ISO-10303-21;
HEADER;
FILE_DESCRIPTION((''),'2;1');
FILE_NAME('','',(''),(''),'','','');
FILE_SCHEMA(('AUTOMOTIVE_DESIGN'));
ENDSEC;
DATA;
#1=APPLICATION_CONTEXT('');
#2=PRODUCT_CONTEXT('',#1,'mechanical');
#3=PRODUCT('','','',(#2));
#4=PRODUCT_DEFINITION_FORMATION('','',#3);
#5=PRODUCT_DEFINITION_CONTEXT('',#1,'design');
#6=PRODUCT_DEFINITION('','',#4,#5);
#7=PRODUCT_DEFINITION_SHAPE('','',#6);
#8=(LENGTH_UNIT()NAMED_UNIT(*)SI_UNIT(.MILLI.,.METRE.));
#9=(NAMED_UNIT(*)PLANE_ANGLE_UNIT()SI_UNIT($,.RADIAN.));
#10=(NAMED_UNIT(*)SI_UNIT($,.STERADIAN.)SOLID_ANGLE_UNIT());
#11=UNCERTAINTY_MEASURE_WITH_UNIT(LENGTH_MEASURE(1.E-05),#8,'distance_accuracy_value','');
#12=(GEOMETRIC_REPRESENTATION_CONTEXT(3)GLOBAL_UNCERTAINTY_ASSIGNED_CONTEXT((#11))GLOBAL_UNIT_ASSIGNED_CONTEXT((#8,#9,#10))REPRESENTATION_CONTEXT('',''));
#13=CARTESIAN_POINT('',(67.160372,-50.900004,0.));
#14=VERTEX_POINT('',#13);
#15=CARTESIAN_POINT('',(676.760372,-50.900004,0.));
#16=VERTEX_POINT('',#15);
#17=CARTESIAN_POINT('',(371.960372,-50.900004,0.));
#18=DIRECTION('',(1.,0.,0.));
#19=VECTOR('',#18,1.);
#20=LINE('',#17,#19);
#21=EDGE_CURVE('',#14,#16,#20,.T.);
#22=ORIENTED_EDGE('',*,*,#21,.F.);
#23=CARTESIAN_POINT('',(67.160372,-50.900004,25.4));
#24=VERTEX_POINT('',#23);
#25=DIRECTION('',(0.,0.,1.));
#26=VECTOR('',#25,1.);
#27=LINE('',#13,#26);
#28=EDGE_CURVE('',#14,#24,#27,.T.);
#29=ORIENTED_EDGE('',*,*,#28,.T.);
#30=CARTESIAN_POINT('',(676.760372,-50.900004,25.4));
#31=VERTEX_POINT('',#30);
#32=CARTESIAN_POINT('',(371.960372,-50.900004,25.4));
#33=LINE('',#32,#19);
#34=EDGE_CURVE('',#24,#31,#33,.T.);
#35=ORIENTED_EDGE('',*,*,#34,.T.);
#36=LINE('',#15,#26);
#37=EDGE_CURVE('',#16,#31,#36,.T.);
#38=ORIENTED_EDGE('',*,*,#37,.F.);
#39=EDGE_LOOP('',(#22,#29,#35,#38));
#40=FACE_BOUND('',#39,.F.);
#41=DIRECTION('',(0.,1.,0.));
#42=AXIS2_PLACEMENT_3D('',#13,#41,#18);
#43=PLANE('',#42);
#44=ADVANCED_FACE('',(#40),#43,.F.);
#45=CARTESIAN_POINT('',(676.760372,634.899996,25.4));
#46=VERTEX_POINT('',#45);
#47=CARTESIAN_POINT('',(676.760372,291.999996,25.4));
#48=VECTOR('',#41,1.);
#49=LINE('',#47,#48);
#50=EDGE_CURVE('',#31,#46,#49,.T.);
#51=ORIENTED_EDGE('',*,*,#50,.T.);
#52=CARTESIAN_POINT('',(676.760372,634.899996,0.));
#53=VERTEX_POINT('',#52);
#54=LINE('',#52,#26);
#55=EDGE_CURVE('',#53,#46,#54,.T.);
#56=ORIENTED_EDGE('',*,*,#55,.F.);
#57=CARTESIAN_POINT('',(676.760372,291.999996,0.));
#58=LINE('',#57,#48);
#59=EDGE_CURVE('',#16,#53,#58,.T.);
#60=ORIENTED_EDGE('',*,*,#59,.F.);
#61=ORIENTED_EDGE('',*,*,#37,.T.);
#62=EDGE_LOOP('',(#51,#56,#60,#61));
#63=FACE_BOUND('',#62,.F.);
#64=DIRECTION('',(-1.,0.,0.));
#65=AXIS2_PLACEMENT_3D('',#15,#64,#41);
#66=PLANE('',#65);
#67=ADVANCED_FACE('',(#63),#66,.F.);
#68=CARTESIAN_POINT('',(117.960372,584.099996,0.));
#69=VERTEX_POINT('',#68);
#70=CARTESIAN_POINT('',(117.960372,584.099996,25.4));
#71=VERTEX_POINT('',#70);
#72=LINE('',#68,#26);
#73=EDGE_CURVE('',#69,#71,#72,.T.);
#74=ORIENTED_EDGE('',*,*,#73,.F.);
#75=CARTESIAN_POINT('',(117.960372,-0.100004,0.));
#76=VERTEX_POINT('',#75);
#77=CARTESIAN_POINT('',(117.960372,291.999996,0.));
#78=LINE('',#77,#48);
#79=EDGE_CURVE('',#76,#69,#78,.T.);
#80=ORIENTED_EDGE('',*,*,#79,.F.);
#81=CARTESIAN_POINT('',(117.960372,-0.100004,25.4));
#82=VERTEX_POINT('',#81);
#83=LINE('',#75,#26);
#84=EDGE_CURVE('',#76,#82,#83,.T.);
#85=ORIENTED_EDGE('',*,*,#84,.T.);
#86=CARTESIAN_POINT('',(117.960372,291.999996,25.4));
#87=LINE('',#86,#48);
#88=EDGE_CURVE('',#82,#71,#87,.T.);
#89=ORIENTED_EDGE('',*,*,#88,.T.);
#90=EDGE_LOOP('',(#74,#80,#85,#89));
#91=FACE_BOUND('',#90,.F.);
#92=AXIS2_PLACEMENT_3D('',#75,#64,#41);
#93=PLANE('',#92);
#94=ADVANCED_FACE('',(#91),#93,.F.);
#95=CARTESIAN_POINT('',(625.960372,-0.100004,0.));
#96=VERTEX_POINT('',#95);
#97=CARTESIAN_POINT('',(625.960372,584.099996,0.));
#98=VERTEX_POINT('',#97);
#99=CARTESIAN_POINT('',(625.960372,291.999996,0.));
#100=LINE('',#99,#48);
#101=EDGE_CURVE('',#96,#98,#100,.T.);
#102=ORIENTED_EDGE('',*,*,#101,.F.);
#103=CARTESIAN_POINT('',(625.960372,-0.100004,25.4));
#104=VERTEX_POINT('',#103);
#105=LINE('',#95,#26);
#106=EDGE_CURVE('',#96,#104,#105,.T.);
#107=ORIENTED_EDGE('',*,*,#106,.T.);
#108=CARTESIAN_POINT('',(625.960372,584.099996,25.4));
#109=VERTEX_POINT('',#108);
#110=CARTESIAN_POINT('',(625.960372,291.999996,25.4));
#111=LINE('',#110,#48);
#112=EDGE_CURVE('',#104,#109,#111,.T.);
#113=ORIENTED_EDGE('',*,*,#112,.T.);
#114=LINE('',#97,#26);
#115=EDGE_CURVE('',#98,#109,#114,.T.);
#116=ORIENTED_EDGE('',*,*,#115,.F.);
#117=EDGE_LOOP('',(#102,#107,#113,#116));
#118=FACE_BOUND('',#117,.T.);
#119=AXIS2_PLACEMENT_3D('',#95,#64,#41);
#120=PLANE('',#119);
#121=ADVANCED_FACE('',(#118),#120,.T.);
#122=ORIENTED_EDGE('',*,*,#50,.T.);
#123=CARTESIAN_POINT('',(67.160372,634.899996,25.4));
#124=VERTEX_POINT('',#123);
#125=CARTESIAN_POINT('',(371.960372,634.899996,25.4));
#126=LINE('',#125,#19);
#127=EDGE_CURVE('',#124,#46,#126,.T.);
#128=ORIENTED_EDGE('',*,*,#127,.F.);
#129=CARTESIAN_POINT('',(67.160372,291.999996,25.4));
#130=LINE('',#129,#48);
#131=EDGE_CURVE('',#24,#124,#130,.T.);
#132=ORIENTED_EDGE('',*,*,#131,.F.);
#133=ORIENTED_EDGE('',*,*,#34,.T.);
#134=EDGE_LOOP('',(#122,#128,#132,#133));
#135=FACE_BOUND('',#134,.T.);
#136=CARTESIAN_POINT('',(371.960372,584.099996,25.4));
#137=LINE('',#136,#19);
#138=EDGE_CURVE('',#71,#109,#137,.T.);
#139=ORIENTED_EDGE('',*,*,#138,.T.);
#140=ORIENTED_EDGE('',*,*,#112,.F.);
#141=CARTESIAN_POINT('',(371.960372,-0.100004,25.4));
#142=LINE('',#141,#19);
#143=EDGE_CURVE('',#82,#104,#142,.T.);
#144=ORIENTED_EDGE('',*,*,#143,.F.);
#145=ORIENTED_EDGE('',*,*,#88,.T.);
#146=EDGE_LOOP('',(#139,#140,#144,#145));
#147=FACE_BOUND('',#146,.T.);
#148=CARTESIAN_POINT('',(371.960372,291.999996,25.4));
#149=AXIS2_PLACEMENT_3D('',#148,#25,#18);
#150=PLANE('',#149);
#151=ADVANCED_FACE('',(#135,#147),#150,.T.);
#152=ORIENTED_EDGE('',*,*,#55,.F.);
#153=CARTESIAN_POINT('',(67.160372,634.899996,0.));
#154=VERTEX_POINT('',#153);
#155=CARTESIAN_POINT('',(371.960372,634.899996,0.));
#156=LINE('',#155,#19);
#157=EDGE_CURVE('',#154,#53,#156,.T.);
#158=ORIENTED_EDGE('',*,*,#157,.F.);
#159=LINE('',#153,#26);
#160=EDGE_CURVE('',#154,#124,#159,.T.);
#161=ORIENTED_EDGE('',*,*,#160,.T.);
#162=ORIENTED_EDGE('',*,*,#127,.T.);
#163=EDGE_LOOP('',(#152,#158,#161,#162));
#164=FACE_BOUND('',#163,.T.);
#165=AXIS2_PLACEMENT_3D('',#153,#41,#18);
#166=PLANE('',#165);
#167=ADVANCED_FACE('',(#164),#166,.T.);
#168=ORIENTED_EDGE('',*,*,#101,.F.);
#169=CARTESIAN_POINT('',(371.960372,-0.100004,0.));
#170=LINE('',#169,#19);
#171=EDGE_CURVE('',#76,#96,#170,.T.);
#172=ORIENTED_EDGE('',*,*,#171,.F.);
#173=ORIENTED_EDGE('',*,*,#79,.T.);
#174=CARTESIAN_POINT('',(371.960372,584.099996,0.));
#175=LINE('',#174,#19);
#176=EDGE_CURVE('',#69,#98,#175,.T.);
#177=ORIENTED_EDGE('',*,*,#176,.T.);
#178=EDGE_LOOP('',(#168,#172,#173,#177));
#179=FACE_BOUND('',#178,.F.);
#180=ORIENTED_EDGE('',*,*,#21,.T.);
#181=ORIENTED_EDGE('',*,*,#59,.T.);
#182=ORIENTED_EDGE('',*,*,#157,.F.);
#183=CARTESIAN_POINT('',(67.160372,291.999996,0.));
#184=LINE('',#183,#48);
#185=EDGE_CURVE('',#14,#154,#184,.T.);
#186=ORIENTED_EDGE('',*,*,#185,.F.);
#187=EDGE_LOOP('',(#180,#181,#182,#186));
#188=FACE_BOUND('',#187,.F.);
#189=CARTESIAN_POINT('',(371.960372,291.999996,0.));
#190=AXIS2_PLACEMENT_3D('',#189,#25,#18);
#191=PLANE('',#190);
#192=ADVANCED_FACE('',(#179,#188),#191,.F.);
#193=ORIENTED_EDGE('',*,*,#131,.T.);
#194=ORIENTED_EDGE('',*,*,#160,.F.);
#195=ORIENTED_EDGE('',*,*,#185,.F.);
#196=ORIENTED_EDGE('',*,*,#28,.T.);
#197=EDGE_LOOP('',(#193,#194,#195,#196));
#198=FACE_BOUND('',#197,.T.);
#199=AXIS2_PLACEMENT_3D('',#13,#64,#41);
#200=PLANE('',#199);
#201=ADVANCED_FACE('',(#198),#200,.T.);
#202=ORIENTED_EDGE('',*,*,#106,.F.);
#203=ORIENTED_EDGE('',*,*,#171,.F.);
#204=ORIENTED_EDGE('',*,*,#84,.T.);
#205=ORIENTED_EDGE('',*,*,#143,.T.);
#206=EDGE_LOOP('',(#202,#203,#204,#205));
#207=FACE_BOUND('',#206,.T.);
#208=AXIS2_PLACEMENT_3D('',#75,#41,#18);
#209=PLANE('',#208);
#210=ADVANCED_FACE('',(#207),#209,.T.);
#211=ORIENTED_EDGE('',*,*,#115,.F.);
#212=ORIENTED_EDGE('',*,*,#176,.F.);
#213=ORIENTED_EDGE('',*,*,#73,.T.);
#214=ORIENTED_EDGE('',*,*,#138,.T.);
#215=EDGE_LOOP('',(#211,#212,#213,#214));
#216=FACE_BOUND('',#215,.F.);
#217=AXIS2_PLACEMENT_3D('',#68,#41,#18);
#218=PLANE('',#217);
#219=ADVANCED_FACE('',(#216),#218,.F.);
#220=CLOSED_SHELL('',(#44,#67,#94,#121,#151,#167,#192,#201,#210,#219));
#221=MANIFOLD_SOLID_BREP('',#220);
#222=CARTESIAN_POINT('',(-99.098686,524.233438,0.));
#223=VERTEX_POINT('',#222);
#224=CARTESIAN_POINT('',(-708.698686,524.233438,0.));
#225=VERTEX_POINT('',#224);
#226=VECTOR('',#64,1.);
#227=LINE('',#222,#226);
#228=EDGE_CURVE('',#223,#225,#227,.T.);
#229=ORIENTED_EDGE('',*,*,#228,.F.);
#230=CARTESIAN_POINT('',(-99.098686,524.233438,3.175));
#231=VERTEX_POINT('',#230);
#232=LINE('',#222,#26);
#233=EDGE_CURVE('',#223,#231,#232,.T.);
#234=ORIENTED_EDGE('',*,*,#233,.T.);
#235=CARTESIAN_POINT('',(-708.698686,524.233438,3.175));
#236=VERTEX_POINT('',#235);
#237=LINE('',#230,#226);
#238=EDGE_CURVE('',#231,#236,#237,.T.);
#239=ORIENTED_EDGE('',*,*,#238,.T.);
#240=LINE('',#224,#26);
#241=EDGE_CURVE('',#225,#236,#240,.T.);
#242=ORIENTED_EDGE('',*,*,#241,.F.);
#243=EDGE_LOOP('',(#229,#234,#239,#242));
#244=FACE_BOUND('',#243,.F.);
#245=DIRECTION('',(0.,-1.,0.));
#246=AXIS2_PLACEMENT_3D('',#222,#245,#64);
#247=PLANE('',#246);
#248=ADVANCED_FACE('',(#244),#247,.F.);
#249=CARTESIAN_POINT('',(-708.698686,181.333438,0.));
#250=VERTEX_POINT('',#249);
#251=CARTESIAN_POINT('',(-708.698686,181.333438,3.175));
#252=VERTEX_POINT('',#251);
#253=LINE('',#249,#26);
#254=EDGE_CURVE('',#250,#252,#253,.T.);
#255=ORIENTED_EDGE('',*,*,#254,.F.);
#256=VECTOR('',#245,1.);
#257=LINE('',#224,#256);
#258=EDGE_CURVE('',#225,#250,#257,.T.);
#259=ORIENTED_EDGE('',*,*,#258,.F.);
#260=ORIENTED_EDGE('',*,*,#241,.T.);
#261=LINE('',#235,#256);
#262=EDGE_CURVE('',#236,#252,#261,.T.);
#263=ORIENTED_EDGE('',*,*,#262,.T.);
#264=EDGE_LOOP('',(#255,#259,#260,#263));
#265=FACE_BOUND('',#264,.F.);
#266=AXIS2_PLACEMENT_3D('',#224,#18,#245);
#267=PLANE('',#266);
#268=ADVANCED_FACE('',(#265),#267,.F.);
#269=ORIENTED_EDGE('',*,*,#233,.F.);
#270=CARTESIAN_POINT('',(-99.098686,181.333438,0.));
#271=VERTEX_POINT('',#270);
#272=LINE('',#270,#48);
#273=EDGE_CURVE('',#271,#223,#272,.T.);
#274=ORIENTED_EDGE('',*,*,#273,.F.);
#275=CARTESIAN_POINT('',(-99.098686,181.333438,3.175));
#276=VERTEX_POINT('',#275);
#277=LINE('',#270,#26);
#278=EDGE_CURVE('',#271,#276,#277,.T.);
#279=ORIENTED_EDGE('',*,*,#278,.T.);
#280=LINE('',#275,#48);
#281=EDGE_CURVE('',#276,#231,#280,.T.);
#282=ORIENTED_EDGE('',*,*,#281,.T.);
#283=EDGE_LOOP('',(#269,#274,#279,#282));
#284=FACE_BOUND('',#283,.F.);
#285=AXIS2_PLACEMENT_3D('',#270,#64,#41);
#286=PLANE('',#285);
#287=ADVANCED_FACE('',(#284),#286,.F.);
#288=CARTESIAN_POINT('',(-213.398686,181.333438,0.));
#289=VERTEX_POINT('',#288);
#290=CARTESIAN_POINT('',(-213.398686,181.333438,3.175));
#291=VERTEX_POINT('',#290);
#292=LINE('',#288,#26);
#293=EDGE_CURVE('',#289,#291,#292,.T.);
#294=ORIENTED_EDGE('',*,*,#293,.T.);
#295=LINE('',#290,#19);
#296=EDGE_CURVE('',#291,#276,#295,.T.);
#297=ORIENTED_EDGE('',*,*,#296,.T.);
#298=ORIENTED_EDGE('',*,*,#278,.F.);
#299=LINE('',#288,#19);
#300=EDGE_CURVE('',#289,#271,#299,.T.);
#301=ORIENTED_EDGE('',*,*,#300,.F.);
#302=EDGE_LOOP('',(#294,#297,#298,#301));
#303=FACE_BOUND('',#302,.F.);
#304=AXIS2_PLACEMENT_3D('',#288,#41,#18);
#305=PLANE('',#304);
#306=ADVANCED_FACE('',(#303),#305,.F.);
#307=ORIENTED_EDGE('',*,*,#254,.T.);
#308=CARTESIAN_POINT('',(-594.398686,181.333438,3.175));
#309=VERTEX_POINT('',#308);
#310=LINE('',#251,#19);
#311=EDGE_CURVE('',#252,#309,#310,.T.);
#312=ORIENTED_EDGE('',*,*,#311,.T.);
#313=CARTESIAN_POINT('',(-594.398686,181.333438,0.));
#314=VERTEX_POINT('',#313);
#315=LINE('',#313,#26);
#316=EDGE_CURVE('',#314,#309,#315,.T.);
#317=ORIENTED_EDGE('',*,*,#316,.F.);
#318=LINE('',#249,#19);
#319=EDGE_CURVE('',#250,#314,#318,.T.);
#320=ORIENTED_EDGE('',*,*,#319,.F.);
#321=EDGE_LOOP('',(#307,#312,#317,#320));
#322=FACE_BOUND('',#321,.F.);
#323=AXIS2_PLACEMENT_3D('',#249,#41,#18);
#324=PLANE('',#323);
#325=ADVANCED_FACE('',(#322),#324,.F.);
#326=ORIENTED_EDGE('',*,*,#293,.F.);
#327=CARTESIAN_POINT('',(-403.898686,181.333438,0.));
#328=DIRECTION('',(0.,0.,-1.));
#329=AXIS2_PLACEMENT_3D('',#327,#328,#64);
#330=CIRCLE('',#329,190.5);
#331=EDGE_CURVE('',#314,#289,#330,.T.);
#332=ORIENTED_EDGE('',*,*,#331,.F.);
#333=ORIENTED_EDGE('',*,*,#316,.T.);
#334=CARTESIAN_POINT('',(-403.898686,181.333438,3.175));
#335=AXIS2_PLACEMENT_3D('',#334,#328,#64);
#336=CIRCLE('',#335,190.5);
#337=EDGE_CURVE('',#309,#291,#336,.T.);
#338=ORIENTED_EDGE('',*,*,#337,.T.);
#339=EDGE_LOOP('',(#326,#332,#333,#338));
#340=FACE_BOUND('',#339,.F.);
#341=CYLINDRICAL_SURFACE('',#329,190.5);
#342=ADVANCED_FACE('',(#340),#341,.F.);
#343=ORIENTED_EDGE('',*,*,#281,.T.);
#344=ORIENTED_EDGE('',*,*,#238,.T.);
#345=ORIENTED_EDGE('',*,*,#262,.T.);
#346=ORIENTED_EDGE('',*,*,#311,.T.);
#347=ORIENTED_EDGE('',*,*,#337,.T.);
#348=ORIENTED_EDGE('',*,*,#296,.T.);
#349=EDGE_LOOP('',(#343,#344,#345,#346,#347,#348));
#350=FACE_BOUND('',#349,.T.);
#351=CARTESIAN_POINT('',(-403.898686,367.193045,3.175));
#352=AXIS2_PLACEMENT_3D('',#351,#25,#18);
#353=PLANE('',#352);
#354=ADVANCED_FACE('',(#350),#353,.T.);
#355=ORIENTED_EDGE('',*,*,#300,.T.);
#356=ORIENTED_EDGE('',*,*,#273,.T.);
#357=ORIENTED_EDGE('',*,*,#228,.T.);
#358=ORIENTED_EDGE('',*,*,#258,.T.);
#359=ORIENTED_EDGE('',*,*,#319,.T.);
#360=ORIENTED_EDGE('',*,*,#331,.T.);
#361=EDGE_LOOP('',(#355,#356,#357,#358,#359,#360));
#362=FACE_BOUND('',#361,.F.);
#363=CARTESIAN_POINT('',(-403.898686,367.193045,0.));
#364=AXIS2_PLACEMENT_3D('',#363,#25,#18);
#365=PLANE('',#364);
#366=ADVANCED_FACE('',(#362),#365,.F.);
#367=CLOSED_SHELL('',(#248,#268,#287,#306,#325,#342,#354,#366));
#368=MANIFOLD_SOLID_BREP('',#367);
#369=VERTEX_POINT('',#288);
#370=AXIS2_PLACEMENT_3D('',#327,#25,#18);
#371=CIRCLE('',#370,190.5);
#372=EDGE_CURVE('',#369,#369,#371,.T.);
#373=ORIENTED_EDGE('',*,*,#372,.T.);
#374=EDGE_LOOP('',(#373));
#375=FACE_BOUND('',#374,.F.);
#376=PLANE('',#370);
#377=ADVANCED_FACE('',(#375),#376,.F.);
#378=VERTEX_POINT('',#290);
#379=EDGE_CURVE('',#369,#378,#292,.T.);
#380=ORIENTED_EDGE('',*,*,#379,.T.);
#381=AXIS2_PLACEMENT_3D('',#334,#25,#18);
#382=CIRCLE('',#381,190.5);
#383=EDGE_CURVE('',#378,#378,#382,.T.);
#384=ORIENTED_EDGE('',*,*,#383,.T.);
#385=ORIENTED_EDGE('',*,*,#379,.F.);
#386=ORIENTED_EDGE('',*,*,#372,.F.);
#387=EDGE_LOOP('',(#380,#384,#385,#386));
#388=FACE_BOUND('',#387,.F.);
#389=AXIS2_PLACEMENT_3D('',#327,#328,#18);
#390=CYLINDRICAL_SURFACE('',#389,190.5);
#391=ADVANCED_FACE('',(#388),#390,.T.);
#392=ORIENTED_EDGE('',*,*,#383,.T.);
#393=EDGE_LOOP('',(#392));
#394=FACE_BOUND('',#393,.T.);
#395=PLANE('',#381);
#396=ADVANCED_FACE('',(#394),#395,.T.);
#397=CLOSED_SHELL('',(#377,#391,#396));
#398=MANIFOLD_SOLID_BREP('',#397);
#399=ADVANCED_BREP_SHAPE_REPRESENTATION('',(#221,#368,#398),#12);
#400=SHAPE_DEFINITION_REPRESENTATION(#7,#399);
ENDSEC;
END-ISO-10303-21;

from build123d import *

# Parameters (mm, degrees)
F1_DEPTH = 3.175
F2_DEPTH = 3.175
F3_W     = 609.6
F3_H     = 685.8
F3_W_2   = 508
F3_H_2   = 584.2
F4_DEPTH = 25.4


# Not quite as in the source:
# - a length typed as a fraction of an inch, garbled in the dataset ("3 / 203.2 mm" for 3/8 in), is restored


with BuildPart() as f1:
    # F0 (on Top) → F1 (new body)
    with BuildSketch(Plane.XY):
        with BuildLine():
            ThreePointArc((-594.3986861706, 181.333437562), (-403.8986861706, -9.166562438), (-213.3986861706, 181.333437562))
            ThreePointArc((-213.3986861706, 181.333437562), (-403.8986861706, 371.833437562), (-594.3986861706, 181.333437562))
        make_face()
    extrude(amount=F1_DEPTH)


with BuildPart() as f2:
    # F0 (on Top) → F2 (new body)
    with BuildSketch(Plane.XY):
        with BuildLine():
            Line((-213.3986861706, 181.333437562), (-99.0986861706, 181.333437562))
            Line((-99.0986861706, 181.333437562), (-99.0986861706, 524.233437562))
            Line((-99.0986861706, 524.233437562), (-708.6986861706, 524.233437562))
            Line((-708.6986861706, 524.233437562), (-708.6986861706, 181.333437562))
            Line((-708.6986861706, 181.333437562), (-594.3986861706, 181.333437562))
            ThreePointArc((-594.3986861706, 181.333437562), (-403.8986861706, 371.833437562), (-213.3986861706, 181.333437562))
        make_face()
    extrude(amount=F2_DEPTH)


with BuildPart() as f4:
    # F3 (on Top) → F4 (new body)
    with BuildSketch(Plane.XY):
        with Locations((371.9603717327, 291.9999957085)):
            Rectangle(F3_W, F3_H)
        with Locations((371.9603717327, 291.9999957085)):
            Rectangle(F3_W_2, F3_H_2, mode=Mode.SUBTRACT)
    extrude(amount=F4_DEPTH)


solid = Compound([f1.part, f2.part, f4.part])
